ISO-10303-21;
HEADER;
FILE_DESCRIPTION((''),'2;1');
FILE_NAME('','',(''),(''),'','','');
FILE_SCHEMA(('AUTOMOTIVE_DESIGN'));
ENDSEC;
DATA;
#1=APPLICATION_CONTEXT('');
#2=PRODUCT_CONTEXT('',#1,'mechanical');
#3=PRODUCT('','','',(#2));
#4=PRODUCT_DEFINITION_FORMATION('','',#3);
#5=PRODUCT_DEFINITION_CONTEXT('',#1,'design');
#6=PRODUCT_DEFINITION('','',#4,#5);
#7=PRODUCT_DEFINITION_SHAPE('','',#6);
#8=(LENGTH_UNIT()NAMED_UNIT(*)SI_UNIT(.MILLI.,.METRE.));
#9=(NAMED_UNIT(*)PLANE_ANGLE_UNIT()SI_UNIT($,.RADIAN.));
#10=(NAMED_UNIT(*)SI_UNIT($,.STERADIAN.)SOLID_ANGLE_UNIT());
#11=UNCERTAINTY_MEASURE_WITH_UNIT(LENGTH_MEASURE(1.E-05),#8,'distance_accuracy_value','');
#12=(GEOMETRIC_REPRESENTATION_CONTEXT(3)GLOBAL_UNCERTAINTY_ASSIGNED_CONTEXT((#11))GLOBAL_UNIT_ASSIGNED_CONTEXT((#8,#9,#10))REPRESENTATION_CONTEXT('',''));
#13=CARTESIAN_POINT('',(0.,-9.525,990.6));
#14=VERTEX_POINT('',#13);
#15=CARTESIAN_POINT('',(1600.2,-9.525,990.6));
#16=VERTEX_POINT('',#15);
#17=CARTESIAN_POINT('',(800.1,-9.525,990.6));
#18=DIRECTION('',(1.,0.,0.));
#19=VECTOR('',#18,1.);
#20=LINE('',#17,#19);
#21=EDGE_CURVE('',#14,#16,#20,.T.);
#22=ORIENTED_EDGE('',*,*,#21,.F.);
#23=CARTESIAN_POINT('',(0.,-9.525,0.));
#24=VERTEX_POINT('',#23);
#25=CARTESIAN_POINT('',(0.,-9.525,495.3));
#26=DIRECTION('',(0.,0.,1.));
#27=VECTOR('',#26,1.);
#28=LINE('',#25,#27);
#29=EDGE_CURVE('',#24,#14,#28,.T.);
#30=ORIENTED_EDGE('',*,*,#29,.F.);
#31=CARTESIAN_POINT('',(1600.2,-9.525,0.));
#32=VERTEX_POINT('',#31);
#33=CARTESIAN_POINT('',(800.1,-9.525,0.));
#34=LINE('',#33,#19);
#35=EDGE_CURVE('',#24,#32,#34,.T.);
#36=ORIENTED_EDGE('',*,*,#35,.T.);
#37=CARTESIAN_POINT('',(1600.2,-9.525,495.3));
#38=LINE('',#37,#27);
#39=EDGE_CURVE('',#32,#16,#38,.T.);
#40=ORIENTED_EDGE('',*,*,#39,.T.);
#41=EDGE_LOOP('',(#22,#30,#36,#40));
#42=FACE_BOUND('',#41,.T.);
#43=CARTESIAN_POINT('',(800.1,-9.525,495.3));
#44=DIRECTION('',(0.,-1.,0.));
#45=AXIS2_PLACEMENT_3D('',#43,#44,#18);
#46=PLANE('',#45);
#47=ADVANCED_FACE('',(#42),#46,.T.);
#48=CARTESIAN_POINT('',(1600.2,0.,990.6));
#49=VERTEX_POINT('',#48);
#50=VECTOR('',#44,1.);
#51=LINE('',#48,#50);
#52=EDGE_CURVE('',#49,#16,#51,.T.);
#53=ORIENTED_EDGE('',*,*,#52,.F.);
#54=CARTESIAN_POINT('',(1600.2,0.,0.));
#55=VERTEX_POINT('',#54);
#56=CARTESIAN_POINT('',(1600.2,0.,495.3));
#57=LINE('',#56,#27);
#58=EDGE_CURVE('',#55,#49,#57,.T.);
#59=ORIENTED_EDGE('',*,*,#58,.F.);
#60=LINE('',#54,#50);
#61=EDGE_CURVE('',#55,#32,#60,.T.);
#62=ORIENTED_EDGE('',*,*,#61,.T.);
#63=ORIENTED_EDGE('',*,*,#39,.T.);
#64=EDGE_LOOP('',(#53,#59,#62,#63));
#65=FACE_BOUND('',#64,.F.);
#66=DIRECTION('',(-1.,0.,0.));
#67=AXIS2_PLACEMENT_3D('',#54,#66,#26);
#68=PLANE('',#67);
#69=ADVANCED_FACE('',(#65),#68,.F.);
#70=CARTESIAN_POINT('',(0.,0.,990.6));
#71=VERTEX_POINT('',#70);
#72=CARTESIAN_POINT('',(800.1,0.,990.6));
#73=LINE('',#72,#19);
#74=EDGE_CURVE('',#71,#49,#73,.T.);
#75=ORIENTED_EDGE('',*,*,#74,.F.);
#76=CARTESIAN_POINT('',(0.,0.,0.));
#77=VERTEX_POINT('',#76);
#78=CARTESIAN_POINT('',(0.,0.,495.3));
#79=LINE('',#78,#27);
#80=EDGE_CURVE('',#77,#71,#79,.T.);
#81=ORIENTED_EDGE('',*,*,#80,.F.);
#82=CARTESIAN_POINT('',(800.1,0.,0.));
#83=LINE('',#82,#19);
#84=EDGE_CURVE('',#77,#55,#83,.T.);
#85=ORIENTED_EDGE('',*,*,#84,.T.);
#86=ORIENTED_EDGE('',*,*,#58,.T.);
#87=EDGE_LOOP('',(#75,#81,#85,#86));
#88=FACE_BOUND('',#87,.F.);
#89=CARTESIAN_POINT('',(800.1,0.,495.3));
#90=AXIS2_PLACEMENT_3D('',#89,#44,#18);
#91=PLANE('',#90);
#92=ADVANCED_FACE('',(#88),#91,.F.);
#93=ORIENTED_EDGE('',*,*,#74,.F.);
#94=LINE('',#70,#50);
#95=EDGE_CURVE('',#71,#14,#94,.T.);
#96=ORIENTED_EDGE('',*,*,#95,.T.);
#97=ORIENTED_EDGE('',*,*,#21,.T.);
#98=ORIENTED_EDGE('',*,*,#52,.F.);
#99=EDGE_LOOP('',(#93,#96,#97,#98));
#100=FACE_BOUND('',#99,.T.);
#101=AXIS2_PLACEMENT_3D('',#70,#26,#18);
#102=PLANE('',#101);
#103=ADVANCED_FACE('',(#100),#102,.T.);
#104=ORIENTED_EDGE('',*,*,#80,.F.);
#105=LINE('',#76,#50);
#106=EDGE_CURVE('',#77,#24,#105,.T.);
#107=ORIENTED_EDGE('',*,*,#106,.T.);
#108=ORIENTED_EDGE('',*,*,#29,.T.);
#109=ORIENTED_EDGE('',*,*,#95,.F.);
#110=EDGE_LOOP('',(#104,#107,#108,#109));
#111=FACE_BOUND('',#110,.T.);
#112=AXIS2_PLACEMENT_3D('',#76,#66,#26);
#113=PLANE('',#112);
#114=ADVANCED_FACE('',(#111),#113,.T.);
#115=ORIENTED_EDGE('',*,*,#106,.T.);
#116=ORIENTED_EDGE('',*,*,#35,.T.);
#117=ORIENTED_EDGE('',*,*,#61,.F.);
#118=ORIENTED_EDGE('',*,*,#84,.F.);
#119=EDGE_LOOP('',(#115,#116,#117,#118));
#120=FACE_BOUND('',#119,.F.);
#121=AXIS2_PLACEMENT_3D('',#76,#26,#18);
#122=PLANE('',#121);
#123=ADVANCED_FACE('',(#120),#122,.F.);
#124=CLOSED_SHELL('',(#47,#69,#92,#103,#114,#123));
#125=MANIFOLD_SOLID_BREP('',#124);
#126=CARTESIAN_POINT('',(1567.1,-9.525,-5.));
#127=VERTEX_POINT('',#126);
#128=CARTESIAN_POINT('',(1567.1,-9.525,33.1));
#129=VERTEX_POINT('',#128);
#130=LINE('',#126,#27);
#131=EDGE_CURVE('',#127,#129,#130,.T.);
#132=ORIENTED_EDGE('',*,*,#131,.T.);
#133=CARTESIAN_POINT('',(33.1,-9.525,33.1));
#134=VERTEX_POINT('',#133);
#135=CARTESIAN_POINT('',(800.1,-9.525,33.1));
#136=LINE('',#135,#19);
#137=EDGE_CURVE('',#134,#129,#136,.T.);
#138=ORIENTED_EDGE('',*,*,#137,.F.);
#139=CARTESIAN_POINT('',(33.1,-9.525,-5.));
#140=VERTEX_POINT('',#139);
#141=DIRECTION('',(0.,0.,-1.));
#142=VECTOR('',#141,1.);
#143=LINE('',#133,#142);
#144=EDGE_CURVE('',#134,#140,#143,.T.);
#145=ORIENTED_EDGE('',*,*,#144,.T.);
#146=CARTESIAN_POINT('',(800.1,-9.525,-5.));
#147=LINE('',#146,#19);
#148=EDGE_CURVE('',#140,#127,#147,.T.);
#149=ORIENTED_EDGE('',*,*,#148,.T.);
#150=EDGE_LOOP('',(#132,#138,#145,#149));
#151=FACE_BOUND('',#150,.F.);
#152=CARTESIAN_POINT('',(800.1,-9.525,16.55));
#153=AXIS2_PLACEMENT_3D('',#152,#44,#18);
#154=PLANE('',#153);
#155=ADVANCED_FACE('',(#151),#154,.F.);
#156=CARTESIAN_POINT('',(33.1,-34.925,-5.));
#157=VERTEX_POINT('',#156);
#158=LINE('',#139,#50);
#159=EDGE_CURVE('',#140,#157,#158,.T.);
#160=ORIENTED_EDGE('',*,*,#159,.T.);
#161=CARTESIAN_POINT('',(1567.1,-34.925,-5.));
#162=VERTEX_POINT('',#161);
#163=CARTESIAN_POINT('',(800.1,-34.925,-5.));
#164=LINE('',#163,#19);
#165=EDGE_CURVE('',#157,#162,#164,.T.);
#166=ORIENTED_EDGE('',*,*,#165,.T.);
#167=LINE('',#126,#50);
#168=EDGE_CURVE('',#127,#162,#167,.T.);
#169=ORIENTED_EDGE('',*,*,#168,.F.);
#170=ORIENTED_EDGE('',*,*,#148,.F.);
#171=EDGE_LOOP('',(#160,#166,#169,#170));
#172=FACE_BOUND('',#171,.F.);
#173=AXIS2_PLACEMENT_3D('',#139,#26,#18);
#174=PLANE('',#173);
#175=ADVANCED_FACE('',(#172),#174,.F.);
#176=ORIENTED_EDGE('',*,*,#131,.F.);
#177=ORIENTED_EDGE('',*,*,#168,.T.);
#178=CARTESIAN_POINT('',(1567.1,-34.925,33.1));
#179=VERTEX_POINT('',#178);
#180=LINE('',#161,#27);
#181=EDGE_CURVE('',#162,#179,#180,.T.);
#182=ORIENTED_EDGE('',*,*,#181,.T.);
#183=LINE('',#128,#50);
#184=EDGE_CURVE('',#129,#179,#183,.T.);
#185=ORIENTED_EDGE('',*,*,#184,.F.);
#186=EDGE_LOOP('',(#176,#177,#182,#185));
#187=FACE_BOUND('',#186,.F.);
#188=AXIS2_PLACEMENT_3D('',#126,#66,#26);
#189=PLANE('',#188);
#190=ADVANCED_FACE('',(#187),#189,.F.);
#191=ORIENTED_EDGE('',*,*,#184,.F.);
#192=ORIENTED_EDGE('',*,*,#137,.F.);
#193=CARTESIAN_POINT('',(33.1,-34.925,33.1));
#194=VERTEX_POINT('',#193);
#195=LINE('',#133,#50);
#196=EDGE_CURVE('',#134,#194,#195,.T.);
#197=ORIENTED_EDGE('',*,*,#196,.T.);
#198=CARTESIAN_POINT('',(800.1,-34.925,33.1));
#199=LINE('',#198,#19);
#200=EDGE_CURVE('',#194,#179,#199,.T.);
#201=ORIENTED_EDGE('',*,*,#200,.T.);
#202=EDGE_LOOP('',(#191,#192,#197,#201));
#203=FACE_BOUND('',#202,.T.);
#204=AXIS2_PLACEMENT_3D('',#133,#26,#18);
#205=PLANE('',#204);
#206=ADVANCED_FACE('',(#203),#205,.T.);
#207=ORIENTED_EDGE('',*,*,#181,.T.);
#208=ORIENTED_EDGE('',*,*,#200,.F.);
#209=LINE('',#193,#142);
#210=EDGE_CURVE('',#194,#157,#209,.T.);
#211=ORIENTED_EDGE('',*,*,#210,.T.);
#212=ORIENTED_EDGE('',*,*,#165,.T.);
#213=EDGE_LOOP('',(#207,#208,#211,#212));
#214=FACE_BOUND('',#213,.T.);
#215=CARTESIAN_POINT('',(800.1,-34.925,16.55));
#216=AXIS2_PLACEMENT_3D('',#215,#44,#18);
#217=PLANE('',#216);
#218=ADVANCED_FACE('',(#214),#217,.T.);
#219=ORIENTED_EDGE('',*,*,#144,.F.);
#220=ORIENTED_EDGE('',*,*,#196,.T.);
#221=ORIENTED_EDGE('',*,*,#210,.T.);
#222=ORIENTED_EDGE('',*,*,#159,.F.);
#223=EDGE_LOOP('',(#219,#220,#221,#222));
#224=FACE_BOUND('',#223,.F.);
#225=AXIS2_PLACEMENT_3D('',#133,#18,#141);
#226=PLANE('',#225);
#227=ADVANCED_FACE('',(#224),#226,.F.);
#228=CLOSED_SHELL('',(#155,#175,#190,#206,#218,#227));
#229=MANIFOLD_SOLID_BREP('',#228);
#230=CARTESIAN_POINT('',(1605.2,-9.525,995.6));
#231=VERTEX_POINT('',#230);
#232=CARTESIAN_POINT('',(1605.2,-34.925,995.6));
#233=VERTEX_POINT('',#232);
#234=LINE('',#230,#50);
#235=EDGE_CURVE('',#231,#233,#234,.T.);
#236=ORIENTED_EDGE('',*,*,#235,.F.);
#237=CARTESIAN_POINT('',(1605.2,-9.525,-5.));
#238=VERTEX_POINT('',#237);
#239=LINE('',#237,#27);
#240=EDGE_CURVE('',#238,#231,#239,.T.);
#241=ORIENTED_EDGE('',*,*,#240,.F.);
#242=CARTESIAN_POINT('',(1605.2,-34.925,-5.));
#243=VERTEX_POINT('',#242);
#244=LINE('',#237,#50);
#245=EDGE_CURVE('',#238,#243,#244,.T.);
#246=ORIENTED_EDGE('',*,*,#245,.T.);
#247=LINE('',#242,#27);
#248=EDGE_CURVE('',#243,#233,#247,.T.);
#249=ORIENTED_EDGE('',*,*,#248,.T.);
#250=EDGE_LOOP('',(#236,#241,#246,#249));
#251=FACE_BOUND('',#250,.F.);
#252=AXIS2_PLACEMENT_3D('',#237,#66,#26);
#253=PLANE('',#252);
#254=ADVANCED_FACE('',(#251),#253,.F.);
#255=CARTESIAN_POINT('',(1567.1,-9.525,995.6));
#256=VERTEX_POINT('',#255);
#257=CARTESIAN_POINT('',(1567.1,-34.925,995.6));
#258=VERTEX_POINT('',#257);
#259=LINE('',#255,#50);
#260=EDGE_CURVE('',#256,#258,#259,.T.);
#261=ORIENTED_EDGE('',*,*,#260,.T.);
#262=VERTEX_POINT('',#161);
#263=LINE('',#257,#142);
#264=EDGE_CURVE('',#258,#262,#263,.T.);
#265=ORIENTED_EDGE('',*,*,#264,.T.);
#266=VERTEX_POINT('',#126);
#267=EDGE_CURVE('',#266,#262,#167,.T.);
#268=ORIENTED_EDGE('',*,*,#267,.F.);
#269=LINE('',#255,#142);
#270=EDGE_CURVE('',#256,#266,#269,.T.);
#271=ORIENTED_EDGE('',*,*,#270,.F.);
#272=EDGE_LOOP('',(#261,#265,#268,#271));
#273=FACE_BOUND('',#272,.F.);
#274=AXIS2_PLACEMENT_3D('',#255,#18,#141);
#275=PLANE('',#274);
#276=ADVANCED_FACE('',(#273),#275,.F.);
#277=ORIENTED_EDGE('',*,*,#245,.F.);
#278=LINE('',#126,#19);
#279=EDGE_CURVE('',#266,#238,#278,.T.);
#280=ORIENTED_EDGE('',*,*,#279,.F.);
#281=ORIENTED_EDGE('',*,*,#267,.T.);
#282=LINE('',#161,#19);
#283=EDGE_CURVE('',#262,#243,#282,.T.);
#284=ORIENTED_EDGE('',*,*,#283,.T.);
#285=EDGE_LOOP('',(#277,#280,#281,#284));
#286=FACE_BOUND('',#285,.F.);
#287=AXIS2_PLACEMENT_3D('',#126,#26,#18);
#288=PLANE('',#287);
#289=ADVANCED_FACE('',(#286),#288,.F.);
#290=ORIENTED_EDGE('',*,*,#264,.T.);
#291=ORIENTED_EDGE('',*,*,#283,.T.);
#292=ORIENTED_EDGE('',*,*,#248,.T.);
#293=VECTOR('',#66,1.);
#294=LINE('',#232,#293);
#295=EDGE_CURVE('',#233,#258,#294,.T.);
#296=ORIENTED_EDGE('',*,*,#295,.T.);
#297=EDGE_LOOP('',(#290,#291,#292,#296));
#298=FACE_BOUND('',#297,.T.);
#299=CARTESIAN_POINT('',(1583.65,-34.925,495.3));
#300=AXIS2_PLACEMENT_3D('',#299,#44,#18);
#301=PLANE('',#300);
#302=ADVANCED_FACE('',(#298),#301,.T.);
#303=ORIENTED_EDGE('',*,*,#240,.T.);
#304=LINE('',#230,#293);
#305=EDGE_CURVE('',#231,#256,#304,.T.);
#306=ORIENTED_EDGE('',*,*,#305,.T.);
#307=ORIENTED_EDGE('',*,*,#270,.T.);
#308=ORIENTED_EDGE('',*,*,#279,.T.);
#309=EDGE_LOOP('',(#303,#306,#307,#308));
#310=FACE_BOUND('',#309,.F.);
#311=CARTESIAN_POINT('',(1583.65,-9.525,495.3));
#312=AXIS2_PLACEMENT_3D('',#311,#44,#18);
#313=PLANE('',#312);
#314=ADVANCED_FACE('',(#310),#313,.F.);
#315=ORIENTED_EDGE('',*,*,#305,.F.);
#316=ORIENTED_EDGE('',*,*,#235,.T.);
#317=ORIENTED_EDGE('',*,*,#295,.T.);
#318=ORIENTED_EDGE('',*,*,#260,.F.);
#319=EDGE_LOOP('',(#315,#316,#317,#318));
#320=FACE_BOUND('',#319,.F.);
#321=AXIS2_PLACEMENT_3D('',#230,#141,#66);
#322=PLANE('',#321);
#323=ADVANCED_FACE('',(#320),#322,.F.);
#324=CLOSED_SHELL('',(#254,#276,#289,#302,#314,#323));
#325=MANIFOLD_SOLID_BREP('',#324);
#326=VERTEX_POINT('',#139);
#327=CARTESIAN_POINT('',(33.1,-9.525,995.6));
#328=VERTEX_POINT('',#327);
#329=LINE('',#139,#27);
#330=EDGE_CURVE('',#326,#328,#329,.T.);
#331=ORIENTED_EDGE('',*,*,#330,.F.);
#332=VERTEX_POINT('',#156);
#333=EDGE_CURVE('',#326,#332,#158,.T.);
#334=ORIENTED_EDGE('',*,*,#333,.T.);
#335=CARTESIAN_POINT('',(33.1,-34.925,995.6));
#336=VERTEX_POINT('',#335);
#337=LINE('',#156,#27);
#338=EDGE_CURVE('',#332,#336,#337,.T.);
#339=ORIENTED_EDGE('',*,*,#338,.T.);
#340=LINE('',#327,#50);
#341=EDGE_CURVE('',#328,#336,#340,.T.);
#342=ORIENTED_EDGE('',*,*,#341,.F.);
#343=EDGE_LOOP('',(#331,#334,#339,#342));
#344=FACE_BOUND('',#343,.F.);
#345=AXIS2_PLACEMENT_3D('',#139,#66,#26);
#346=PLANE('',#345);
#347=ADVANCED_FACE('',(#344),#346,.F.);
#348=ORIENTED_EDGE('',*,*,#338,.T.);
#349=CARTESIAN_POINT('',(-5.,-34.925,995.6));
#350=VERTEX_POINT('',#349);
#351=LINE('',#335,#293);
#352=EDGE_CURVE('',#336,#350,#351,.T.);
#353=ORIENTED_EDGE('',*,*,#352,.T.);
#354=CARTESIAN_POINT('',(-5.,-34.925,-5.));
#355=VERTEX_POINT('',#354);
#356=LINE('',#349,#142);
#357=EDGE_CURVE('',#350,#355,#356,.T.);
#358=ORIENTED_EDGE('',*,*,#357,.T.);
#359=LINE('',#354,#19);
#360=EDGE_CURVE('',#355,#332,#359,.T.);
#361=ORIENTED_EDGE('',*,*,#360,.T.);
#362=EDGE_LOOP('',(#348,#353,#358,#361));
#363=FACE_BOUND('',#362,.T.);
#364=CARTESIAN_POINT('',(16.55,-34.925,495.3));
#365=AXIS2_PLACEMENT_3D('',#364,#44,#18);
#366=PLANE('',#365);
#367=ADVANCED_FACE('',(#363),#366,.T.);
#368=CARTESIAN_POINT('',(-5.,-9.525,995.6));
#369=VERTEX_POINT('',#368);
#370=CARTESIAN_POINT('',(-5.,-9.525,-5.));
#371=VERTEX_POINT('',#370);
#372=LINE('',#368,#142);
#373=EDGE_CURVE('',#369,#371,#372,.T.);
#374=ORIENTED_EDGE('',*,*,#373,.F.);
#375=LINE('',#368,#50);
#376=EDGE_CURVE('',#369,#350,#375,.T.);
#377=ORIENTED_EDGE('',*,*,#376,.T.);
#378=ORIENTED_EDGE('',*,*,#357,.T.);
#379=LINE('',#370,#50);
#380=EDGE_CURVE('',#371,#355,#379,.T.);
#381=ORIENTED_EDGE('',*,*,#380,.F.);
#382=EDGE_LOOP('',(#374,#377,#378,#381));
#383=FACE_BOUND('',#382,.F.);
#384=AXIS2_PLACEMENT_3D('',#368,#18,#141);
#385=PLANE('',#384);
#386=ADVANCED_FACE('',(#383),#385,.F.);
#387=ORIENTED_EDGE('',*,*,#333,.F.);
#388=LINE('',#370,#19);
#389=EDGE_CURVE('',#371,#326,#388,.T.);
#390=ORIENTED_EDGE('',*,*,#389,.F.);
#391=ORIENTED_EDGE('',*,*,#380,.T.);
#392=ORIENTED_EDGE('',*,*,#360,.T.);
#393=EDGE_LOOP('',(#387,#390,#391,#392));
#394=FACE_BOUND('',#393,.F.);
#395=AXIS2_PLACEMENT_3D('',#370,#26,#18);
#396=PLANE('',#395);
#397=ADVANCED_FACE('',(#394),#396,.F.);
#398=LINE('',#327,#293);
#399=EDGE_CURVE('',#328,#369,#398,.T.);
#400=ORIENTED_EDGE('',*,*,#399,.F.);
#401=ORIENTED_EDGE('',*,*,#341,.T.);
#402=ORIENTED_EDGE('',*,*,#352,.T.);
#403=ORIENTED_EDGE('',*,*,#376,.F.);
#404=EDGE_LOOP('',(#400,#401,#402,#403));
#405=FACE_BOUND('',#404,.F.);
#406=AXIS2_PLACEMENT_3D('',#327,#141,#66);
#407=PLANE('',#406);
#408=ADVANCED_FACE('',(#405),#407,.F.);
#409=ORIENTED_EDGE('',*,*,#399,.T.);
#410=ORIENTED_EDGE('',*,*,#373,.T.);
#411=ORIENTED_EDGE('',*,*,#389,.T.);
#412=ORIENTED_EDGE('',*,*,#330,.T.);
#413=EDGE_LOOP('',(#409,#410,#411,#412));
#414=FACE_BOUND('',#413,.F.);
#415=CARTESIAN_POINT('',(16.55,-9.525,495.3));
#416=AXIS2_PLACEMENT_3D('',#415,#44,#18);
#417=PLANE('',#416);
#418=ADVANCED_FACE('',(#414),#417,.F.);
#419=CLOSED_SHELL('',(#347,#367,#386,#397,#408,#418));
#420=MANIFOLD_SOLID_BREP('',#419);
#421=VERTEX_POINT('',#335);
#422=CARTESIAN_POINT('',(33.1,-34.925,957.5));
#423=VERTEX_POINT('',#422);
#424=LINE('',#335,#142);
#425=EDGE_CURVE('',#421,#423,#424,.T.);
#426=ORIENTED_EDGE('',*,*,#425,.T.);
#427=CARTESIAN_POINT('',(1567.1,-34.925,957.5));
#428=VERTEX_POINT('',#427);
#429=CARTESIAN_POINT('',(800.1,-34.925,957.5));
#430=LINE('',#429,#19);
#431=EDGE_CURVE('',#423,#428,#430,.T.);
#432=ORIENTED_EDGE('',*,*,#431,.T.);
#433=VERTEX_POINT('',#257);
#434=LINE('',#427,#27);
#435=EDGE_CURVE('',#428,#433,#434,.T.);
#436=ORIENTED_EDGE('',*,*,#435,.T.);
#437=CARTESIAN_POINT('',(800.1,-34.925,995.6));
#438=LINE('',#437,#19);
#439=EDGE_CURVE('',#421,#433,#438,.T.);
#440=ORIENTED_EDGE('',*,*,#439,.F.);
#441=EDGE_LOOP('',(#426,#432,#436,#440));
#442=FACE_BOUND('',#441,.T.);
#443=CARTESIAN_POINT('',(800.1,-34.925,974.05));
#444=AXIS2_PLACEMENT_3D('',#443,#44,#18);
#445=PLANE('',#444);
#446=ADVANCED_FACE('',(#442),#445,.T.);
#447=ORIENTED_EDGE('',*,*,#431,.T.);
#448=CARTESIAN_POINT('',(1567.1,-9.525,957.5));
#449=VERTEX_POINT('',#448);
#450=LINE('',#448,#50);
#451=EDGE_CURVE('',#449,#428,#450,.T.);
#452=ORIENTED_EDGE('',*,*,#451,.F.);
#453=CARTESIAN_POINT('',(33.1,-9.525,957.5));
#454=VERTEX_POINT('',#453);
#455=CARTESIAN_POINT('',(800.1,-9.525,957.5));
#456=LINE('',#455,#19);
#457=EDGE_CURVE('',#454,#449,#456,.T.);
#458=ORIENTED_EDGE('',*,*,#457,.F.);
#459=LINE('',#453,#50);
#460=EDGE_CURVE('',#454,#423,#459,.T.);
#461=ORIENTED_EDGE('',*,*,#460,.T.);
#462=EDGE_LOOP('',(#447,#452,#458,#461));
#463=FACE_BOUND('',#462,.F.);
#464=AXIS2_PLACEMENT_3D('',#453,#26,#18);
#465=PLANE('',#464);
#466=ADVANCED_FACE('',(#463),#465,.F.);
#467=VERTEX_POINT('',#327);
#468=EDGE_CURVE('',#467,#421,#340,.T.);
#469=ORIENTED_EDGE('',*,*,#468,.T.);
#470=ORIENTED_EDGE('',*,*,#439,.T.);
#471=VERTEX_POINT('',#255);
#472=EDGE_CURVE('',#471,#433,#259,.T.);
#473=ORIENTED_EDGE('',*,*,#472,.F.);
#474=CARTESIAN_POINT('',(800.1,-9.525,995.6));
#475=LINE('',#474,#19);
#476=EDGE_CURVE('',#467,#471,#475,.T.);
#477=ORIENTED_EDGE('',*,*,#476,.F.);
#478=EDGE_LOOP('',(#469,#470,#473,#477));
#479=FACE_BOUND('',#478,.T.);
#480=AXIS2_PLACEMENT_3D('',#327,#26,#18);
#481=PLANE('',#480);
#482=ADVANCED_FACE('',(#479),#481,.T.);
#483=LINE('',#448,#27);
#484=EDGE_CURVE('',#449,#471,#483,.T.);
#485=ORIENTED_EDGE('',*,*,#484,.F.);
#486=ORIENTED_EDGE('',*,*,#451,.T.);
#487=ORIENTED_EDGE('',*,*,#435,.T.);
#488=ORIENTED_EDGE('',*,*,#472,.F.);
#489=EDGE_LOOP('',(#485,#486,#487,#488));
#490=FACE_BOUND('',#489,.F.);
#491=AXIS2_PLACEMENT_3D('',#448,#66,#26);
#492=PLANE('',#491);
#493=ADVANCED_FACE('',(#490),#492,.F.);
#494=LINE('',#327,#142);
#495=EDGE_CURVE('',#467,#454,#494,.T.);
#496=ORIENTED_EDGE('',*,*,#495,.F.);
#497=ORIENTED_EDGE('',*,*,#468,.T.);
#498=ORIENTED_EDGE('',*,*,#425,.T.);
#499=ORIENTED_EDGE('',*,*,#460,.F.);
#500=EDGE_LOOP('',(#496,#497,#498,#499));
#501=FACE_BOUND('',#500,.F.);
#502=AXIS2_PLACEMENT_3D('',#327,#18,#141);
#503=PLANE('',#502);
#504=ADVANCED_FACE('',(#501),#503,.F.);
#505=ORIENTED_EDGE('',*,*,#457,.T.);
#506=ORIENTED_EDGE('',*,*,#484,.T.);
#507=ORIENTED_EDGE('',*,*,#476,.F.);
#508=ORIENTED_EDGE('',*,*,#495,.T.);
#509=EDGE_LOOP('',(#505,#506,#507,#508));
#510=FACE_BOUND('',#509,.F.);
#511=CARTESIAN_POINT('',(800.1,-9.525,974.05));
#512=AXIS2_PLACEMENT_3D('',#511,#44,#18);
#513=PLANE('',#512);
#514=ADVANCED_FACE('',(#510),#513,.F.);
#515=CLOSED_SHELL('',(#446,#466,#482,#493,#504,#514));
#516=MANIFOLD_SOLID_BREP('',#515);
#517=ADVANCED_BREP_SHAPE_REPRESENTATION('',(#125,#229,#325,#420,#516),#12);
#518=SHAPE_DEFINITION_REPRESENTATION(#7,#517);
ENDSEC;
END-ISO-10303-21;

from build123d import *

# Parameters (mm, degrees)
F2_W     = 1600.2
F2_H     = 990.6
F3_DEPTH = 9.525
F5_DEPTH = 25.4
F4_W     = 1534
F4_H     = 33.1
F4_H_2   = 5
F6_DEPTH = 25.4
F7_DEPTH = 25.4
F8_DEPTH = 25.4


# Not quite as in the source:
# - a length typed as a fraction of an inch, garbled in the dataset ("3 / 203.2 mm" for 3/8 in), is restored


with BuildPart() as f3:
    # F2 (on Front) → F3 (new body)
    with BuildSketch(Plane.XZ):
        with Locations((800.1, 495.3)):
            Rectangle(F2_W, F2_H)
    extrude(amount=F3_DEPTH)


with BuildPart() as f5:
    # F4 (on face) → F5 (new body)
    with BuildSketch(Plane.XZ.offset(9.525)):
        Polygon((33.1, 957.5), (33.1, 990.6), (0, 990.6), (0, 0), (33.1, 0), (33.1, 33.1), align=None)
        Polygon((33.1, 995.6), (-5, 995.6), (-5, -5), (33.1, -5), (33.1, 0), (0, 0), (0, 990.6), (33.1, 990.6), align=None)
    extrude(amount=F5_DEPTH)


with BuildPart() as f6:
    # F4 (on face) → F6 (new body)
    with BuildSketch(Plane.XZ.offset(9.525)):
        with Locations((800.1, 974.05)):
            Rectangle(F4_W, F4_H)
        with Locations((800.1, 993.1)):
            Rectangle(F4_W, F4_H_2)
    extrude(amount=F6_DEPTH)


with BuildPart() as f7:
    # F4 (on face) → F7 (new body)
    with BuildSketch(Plane.XZ.offset(9.525)):
        Polygon((1600.2, 990.6), (1567.1, 990.6), (1567.1, 957.5), (1567.1, 33.1), (1567.1, 0), (1600.2, 0), align=None)
        Polygon((1605.2, 995.6), (1567.1, 995.6), (1567.1, 990.6), (1600.2, 990.6), (1600.2, 0), (1567.1, 0), (1567.1, -5), (1605.2, -5), align=None)
    extrude(amount=F7_DEPTH)


with BuildPart() as f8:
    # F4 (on face) → F8 (new body)
    with BuildSketch(Plane.XZ.offset(9.525)):
        with Locations((800.1, 16.55)):
            Rectangle(F4_W, F4_H)
        with Locations((800.1, -2.5)):
            Rectangle(F4_W, F4_H_2)
    extrude(amount=F8_DEPTH)


solid = Compound([f3.part, f5.part, f6.part, f7.part, f8.part])
